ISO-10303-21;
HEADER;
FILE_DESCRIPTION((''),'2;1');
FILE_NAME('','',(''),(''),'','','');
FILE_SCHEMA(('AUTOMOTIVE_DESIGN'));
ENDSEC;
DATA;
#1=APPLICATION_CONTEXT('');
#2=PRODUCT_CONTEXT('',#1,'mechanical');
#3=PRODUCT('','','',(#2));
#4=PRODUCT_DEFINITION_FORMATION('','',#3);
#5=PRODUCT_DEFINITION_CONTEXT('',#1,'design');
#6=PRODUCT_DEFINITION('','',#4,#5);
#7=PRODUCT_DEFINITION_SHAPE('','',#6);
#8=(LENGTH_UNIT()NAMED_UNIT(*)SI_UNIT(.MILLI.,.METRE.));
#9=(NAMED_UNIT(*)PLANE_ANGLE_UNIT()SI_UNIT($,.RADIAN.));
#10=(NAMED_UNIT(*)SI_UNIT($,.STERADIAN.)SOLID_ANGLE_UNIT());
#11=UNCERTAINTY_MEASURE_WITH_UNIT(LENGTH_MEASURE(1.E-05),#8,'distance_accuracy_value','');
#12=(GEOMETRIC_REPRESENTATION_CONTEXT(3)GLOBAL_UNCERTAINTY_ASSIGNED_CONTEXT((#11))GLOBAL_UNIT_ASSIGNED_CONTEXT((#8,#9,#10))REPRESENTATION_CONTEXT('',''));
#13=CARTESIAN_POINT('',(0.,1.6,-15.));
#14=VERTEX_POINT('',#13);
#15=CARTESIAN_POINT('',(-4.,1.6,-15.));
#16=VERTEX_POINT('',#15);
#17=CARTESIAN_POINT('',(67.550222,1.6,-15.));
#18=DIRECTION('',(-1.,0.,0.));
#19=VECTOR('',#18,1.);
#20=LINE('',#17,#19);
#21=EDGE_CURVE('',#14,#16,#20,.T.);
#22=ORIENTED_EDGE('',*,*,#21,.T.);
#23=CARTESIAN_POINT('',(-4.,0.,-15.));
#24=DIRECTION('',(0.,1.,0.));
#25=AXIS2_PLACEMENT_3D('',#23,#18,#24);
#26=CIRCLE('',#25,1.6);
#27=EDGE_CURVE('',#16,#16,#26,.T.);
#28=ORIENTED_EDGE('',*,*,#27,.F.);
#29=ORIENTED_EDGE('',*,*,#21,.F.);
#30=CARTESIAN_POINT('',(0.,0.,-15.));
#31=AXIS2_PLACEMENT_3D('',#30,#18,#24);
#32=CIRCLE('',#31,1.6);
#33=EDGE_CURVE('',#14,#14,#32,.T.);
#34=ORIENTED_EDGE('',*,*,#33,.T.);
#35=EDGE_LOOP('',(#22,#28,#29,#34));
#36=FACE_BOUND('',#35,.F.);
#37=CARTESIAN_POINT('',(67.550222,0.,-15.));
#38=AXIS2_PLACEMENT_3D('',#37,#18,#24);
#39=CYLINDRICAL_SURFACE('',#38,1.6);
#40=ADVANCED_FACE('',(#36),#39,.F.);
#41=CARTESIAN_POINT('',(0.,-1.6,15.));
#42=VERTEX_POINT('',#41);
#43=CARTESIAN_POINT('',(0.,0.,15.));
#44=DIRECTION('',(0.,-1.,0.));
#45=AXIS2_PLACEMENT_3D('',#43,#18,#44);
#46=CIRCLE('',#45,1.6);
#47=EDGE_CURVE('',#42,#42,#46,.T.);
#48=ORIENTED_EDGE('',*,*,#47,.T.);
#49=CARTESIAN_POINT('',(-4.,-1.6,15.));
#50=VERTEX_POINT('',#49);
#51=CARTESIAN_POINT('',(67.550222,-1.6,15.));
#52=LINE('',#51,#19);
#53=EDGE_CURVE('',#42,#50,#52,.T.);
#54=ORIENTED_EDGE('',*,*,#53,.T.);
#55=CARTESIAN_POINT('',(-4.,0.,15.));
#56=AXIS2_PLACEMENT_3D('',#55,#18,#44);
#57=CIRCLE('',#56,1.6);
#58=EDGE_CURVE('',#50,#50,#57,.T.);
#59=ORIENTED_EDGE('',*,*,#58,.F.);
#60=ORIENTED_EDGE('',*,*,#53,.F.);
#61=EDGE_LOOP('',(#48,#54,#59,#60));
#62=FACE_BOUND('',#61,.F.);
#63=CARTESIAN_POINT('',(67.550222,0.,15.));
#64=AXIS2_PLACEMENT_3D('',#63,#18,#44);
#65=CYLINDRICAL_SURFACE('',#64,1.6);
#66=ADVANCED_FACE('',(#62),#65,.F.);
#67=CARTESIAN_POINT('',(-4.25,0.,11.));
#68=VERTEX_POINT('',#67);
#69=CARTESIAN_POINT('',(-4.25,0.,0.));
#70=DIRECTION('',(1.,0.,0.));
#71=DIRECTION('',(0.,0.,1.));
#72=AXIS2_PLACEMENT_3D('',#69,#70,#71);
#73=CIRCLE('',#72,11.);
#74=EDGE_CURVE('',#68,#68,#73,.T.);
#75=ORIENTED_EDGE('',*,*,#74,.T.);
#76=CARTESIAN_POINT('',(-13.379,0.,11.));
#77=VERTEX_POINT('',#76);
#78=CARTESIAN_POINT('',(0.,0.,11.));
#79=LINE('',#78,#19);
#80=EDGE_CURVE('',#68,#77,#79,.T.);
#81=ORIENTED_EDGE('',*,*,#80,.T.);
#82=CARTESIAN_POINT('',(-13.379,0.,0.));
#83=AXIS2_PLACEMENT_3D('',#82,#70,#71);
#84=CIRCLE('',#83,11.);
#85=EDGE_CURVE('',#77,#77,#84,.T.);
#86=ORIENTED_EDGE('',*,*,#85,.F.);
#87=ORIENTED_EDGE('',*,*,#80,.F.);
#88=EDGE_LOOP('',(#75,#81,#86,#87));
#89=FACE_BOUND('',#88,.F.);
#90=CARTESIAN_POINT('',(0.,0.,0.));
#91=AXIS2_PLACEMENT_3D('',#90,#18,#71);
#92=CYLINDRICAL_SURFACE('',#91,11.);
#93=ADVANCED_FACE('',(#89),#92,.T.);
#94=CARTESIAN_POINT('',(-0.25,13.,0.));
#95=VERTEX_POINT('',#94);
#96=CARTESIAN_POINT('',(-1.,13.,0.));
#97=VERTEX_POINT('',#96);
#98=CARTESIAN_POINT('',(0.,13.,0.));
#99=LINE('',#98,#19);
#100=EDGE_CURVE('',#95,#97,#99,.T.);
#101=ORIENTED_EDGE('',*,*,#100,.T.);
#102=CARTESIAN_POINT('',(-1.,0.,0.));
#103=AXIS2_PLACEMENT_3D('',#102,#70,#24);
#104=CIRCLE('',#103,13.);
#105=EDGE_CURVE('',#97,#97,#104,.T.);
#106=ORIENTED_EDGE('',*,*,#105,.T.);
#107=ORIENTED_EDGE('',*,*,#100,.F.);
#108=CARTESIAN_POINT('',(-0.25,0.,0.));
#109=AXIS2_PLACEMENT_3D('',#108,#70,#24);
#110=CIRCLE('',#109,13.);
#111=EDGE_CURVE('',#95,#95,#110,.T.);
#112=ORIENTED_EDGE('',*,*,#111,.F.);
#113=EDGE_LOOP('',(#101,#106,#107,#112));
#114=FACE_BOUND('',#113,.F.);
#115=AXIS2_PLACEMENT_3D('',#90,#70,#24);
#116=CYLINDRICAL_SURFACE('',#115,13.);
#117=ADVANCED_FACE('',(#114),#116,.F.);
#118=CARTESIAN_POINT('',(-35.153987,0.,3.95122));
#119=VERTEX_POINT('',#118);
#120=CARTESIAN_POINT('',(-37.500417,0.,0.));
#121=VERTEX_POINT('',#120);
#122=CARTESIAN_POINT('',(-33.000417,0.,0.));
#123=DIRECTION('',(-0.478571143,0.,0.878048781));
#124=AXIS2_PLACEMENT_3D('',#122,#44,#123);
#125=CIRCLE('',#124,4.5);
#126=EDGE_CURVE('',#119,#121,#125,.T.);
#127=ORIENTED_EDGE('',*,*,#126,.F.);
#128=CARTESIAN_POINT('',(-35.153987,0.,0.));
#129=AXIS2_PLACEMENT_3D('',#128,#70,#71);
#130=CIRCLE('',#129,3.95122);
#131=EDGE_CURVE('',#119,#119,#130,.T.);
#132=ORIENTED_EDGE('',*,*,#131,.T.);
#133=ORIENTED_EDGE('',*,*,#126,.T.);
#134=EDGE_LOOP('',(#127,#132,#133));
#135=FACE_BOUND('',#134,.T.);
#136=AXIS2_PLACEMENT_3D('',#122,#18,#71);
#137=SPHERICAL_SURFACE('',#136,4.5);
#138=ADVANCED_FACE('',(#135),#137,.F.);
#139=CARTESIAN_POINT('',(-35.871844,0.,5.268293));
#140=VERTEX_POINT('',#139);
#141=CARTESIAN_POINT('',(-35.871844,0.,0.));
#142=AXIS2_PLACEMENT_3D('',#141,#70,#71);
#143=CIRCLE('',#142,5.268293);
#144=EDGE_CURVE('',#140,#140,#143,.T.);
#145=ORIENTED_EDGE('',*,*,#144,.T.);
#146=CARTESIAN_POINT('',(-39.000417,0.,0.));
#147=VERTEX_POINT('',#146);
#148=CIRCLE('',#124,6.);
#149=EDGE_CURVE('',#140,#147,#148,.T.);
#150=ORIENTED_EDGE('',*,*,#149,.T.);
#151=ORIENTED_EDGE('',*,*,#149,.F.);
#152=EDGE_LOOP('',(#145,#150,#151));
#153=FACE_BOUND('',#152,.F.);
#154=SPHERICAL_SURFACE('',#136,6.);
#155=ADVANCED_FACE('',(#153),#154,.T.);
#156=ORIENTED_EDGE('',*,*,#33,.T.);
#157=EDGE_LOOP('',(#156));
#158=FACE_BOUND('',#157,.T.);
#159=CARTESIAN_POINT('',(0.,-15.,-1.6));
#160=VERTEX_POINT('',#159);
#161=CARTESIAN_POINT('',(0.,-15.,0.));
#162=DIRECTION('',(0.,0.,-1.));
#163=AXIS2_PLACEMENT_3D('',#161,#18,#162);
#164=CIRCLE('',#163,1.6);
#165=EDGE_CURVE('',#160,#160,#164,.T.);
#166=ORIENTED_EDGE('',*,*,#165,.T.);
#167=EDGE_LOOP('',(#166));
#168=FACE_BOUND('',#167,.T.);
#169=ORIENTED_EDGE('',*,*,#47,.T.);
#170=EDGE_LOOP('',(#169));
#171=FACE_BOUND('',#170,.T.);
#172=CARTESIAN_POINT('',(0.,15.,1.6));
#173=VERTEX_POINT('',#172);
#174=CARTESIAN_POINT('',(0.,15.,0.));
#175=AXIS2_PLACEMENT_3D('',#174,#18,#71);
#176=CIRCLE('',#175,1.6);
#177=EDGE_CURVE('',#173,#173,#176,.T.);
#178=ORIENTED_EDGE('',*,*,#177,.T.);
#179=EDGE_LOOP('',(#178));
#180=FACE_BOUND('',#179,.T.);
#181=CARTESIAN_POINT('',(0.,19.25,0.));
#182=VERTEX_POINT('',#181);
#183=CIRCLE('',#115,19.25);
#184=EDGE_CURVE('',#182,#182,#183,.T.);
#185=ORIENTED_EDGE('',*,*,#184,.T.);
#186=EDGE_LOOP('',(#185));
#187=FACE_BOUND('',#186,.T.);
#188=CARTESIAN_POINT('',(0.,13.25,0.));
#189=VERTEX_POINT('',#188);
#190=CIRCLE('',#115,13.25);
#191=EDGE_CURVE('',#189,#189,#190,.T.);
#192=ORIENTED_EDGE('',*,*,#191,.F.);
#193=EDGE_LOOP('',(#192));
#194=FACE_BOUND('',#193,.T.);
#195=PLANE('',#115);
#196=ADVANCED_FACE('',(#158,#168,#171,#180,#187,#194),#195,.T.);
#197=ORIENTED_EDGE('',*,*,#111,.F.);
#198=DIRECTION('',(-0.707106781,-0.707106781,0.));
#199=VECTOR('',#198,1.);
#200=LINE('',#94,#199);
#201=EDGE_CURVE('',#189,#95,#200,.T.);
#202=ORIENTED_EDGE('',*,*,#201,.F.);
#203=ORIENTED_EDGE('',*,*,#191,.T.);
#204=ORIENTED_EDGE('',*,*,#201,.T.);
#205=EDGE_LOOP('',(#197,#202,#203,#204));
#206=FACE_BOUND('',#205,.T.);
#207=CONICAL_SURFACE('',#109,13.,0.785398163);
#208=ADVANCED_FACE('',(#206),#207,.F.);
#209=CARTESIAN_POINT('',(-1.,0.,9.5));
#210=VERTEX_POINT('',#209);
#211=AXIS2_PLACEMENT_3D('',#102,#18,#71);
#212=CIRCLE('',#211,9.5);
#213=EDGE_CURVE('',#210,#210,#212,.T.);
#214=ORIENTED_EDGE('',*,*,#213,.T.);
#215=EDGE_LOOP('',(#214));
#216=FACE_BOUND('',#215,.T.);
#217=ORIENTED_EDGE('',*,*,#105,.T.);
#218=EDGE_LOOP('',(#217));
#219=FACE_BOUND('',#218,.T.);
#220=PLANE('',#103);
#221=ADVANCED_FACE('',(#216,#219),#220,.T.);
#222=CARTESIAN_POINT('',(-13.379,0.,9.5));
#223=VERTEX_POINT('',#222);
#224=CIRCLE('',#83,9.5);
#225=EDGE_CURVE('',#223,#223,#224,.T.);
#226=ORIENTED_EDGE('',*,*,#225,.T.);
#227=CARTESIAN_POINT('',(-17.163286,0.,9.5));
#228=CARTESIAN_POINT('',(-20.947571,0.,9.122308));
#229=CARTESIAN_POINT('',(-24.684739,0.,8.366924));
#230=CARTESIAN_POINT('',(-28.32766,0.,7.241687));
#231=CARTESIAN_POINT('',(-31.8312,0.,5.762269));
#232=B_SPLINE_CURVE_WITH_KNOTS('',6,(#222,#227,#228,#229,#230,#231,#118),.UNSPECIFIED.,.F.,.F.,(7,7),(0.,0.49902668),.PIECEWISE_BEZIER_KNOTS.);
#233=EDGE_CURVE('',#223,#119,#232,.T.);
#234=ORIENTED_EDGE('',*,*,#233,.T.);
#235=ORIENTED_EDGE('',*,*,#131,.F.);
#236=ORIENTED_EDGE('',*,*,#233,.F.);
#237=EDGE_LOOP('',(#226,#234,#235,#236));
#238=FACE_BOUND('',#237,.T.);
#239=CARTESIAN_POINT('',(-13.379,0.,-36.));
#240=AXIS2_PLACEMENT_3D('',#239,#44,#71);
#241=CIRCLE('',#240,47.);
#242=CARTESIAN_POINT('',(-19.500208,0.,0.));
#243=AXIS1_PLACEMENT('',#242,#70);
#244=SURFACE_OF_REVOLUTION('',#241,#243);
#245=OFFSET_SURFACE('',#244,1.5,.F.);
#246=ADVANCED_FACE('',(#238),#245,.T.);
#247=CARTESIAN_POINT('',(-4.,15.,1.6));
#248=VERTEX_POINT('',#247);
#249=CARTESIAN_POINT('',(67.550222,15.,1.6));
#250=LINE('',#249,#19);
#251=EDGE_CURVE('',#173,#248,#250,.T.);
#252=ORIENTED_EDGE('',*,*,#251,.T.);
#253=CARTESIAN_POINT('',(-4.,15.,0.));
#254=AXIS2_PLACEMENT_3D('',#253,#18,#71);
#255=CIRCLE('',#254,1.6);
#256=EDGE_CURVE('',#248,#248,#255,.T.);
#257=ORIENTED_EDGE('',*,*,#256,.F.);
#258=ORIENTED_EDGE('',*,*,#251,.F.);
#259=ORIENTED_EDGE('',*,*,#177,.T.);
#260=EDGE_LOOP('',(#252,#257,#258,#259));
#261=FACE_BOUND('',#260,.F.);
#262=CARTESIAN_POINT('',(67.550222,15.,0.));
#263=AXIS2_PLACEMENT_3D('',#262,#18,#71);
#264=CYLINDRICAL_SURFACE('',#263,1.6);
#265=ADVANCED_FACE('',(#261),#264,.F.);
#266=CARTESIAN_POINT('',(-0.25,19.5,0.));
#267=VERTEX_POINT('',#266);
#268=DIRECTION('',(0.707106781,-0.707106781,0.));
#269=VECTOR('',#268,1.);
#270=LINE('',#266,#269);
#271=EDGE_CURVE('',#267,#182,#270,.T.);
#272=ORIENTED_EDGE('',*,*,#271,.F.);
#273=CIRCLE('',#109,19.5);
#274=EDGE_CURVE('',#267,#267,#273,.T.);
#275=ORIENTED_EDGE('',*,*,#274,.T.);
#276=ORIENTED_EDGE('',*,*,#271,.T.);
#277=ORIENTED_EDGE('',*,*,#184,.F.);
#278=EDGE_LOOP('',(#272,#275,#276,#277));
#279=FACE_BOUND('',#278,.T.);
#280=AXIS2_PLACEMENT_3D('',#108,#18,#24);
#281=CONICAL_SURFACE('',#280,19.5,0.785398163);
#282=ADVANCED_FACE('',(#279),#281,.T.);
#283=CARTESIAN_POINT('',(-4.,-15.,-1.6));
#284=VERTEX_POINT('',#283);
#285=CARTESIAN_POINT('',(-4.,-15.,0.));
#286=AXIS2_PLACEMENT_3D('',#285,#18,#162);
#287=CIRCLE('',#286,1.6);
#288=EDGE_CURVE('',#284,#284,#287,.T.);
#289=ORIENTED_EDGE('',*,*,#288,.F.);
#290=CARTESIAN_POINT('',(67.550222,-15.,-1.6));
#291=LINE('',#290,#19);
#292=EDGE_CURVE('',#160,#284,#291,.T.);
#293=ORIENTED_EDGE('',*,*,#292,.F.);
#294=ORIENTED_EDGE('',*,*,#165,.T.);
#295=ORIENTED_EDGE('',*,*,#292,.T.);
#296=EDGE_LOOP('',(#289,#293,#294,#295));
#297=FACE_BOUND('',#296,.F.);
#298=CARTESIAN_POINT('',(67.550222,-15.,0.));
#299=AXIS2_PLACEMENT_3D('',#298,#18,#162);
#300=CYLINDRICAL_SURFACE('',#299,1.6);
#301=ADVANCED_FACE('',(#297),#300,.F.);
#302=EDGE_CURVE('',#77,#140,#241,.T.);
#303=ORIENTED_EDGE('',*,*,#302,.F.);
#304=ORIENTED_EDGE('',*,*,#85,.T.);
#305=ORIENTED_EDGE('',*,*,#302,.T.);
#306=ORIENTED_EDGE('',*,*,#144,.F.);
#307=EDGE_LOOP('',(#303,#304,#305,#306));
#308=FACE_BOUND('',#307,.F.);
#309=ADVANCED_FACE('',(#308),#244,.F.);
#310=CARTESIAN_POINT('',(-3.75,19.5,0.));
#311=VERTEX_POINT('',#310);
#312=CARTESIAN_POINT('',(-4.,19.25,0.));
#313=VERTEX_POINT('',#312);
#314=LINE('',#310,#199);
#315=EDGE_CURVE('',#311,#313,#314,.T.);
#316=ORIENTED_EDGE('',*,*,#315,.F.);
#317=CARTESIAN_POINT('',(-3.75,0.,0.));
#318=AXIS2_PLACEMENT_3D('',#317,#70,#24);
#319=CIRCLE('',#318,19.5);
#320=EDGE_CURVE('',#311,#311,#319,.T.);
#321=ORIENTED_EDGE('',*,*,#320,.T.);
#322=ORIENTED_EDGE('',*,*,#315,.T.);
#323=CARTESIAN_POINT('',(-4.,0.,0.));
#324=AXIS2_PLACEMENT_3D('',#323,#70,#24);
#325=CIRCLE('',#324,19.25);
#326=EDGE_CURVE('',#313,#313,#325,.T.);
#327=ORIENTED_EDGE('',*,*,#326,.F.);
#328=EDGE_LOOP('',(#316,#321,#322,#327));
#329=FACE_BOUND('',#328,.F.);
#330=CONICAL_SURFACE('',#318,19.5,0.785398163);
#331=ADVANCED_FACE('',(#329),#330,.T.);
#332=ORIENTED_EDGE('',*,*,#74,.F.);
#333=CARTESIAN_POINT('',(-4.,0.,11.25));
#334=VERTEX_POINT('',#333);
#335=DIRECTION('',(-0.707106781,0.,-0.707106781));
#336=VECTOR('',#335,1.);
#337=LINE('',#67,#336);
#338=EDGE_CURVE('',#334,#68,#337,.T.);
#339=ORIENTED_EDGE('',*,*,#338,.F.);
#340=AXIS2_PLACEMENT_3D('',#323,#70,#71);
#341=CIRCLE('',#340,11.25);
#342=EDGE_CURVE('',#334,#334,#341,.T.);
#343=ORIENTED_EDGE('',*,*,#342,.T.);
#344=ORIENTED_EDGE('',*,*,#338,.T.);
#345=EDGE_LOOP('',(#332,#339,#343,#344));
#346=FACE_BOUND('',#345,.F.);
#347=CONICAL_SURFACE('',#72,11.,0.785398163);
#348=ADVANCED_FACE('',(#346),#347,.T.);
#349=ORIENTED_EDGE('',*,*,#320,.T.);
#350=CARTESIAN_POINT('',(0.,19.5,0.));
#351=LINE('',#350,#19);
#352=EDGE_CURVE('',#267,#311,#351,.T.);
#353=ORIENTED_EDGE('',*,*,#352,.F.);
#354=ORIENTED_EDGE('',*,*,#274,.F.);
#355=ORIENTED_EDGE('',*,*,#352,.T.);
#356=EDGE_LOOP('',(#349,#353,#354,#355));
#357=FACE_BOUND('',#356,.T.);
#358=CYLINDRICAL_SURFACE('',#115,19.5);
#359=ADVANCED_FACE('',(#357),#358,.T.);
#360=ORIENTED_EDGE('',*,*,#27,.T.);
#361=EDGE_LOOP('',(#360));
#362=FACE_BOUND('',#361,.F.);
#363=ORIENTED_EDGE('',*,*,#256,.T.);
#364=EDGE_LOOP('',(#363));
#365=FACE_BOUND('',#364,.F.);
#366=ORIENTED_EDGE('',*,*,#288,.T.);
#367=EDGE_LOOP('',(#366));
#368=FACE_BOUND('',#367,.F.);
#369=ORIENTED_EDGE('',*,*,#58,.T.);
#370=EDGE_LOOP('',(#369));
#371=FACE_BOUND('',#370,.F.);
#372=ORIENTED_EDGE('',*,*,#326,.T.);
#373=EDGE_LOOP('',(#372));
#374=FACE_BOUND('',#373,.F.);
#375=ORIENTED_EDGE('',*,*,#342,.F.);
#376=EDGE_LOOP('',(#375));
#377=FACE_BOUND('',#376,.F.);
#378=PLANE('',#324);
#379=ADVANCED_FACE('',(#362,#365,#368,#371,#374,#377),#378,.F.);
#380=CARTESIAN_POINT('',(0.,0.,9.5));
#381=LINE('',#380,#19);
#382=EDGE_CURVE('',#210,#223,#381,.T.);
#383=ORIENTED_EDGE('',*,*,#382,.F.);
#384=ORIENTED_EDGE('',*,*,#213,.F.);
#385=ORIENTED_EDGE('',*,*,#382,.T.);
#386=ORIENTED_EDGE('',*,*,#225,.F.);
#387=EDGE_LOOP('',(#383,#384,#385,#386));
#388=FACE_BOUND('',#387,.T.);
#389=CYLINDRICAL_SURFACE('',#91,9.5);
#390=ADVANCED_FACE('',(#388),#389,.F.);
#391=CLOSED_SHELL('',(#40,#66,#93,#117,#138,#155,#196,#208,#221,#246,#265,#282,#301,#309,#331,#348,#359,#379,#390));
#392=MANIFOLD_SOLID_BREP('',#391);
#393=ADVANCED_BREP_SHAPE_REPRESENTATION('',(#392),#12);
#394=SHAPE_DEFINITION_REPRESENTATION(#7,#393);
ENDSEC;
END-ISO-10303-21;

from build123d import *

# Parameters (mm, degrees)
F2_T            = -1.5
F3_R            = 19.5
F3_R_2          = 11
F4_DEPTH        = 4
F5_R            = 13
F6_DEPTH        = 1
F7_SIZE         = 0.25
F9_D            = 3.2
F9_COPIES_COUNT = 4


# Not quite as in the source:
# - a pattern or mirror of a feature is missing from the dataset's text; its kind, count and spacing are read off the source's solid


with BuildPart() as f1:
    # F0 (on Front) → F1 (revolve)
    with BuildSketch(Plane.XZ):
        with BuildLine():
            Line((-39.0004168703, 0), (0, 0))
            Line((0, 0), (0, 11))
            Line((0, 11), (-13.379, 11))
            ThreePointArc((-13.379, 11), (-24.9848227606, 9.544537302), (-35.8718437294, 5.2682926829))
            ThreePointArc((-35.8718437294, 5.2682926829), (-38.1593199105, 3.0636121528), (-39.0004168703, 0))
        make_face()
    revolve(axis=Axis((-19.5002084352, 0, 0), (1, 0, 0)))

    # F2
    f2_openings = [f1.faces().sort_by_distance(p)[0] for p in [
        (0, 0, 0),
    ]]
    offset(amount=F2_T, openings=f2_openings)

    # F3 (on Right) → F4 (join)
    with BuildSketch(Plane.YZ):
        Circle(F3_R)
        Circle(F3_R_2, mode=Mode.SUBTRACT)
    extrude(amount=-F4_DEPTH)

    # F5 (on Right) → F6 (cut)
    with BuildSketch(Plane.YZ):
        Circle(F5_R)
    extrude(amount=-F6_DEPTH, mode=Mode.SUBTRACT)

    # F7
    f7_edges = [f1.edges().sort_by_distance(p)[0] for p in [
        (-4, -19.5, 0),
        (-4, 0, -11),
        (0, -19.5, 0),
        (0, -13, 0),
    ]]
    chamfer(f7_edges, length=F7_SIZE)

    # F9 (through all)
    with Locations(Plane.YZ):
        with Locations((0, 15)):
            f9 = Hole(F9_D / 2)

    # F9_copies: F9 ×4 about axis
    f9_copies_axis = Axis((0, 0, 0), (1, 0, 0))
    for i in range(1, F9_COPIES_COUNT):
        add(f9.rotate(f9_copies_axis, i * 360 / F9_COPIES_COUNT), mode=Mode.SUBTRACT)


solid = f1.part
